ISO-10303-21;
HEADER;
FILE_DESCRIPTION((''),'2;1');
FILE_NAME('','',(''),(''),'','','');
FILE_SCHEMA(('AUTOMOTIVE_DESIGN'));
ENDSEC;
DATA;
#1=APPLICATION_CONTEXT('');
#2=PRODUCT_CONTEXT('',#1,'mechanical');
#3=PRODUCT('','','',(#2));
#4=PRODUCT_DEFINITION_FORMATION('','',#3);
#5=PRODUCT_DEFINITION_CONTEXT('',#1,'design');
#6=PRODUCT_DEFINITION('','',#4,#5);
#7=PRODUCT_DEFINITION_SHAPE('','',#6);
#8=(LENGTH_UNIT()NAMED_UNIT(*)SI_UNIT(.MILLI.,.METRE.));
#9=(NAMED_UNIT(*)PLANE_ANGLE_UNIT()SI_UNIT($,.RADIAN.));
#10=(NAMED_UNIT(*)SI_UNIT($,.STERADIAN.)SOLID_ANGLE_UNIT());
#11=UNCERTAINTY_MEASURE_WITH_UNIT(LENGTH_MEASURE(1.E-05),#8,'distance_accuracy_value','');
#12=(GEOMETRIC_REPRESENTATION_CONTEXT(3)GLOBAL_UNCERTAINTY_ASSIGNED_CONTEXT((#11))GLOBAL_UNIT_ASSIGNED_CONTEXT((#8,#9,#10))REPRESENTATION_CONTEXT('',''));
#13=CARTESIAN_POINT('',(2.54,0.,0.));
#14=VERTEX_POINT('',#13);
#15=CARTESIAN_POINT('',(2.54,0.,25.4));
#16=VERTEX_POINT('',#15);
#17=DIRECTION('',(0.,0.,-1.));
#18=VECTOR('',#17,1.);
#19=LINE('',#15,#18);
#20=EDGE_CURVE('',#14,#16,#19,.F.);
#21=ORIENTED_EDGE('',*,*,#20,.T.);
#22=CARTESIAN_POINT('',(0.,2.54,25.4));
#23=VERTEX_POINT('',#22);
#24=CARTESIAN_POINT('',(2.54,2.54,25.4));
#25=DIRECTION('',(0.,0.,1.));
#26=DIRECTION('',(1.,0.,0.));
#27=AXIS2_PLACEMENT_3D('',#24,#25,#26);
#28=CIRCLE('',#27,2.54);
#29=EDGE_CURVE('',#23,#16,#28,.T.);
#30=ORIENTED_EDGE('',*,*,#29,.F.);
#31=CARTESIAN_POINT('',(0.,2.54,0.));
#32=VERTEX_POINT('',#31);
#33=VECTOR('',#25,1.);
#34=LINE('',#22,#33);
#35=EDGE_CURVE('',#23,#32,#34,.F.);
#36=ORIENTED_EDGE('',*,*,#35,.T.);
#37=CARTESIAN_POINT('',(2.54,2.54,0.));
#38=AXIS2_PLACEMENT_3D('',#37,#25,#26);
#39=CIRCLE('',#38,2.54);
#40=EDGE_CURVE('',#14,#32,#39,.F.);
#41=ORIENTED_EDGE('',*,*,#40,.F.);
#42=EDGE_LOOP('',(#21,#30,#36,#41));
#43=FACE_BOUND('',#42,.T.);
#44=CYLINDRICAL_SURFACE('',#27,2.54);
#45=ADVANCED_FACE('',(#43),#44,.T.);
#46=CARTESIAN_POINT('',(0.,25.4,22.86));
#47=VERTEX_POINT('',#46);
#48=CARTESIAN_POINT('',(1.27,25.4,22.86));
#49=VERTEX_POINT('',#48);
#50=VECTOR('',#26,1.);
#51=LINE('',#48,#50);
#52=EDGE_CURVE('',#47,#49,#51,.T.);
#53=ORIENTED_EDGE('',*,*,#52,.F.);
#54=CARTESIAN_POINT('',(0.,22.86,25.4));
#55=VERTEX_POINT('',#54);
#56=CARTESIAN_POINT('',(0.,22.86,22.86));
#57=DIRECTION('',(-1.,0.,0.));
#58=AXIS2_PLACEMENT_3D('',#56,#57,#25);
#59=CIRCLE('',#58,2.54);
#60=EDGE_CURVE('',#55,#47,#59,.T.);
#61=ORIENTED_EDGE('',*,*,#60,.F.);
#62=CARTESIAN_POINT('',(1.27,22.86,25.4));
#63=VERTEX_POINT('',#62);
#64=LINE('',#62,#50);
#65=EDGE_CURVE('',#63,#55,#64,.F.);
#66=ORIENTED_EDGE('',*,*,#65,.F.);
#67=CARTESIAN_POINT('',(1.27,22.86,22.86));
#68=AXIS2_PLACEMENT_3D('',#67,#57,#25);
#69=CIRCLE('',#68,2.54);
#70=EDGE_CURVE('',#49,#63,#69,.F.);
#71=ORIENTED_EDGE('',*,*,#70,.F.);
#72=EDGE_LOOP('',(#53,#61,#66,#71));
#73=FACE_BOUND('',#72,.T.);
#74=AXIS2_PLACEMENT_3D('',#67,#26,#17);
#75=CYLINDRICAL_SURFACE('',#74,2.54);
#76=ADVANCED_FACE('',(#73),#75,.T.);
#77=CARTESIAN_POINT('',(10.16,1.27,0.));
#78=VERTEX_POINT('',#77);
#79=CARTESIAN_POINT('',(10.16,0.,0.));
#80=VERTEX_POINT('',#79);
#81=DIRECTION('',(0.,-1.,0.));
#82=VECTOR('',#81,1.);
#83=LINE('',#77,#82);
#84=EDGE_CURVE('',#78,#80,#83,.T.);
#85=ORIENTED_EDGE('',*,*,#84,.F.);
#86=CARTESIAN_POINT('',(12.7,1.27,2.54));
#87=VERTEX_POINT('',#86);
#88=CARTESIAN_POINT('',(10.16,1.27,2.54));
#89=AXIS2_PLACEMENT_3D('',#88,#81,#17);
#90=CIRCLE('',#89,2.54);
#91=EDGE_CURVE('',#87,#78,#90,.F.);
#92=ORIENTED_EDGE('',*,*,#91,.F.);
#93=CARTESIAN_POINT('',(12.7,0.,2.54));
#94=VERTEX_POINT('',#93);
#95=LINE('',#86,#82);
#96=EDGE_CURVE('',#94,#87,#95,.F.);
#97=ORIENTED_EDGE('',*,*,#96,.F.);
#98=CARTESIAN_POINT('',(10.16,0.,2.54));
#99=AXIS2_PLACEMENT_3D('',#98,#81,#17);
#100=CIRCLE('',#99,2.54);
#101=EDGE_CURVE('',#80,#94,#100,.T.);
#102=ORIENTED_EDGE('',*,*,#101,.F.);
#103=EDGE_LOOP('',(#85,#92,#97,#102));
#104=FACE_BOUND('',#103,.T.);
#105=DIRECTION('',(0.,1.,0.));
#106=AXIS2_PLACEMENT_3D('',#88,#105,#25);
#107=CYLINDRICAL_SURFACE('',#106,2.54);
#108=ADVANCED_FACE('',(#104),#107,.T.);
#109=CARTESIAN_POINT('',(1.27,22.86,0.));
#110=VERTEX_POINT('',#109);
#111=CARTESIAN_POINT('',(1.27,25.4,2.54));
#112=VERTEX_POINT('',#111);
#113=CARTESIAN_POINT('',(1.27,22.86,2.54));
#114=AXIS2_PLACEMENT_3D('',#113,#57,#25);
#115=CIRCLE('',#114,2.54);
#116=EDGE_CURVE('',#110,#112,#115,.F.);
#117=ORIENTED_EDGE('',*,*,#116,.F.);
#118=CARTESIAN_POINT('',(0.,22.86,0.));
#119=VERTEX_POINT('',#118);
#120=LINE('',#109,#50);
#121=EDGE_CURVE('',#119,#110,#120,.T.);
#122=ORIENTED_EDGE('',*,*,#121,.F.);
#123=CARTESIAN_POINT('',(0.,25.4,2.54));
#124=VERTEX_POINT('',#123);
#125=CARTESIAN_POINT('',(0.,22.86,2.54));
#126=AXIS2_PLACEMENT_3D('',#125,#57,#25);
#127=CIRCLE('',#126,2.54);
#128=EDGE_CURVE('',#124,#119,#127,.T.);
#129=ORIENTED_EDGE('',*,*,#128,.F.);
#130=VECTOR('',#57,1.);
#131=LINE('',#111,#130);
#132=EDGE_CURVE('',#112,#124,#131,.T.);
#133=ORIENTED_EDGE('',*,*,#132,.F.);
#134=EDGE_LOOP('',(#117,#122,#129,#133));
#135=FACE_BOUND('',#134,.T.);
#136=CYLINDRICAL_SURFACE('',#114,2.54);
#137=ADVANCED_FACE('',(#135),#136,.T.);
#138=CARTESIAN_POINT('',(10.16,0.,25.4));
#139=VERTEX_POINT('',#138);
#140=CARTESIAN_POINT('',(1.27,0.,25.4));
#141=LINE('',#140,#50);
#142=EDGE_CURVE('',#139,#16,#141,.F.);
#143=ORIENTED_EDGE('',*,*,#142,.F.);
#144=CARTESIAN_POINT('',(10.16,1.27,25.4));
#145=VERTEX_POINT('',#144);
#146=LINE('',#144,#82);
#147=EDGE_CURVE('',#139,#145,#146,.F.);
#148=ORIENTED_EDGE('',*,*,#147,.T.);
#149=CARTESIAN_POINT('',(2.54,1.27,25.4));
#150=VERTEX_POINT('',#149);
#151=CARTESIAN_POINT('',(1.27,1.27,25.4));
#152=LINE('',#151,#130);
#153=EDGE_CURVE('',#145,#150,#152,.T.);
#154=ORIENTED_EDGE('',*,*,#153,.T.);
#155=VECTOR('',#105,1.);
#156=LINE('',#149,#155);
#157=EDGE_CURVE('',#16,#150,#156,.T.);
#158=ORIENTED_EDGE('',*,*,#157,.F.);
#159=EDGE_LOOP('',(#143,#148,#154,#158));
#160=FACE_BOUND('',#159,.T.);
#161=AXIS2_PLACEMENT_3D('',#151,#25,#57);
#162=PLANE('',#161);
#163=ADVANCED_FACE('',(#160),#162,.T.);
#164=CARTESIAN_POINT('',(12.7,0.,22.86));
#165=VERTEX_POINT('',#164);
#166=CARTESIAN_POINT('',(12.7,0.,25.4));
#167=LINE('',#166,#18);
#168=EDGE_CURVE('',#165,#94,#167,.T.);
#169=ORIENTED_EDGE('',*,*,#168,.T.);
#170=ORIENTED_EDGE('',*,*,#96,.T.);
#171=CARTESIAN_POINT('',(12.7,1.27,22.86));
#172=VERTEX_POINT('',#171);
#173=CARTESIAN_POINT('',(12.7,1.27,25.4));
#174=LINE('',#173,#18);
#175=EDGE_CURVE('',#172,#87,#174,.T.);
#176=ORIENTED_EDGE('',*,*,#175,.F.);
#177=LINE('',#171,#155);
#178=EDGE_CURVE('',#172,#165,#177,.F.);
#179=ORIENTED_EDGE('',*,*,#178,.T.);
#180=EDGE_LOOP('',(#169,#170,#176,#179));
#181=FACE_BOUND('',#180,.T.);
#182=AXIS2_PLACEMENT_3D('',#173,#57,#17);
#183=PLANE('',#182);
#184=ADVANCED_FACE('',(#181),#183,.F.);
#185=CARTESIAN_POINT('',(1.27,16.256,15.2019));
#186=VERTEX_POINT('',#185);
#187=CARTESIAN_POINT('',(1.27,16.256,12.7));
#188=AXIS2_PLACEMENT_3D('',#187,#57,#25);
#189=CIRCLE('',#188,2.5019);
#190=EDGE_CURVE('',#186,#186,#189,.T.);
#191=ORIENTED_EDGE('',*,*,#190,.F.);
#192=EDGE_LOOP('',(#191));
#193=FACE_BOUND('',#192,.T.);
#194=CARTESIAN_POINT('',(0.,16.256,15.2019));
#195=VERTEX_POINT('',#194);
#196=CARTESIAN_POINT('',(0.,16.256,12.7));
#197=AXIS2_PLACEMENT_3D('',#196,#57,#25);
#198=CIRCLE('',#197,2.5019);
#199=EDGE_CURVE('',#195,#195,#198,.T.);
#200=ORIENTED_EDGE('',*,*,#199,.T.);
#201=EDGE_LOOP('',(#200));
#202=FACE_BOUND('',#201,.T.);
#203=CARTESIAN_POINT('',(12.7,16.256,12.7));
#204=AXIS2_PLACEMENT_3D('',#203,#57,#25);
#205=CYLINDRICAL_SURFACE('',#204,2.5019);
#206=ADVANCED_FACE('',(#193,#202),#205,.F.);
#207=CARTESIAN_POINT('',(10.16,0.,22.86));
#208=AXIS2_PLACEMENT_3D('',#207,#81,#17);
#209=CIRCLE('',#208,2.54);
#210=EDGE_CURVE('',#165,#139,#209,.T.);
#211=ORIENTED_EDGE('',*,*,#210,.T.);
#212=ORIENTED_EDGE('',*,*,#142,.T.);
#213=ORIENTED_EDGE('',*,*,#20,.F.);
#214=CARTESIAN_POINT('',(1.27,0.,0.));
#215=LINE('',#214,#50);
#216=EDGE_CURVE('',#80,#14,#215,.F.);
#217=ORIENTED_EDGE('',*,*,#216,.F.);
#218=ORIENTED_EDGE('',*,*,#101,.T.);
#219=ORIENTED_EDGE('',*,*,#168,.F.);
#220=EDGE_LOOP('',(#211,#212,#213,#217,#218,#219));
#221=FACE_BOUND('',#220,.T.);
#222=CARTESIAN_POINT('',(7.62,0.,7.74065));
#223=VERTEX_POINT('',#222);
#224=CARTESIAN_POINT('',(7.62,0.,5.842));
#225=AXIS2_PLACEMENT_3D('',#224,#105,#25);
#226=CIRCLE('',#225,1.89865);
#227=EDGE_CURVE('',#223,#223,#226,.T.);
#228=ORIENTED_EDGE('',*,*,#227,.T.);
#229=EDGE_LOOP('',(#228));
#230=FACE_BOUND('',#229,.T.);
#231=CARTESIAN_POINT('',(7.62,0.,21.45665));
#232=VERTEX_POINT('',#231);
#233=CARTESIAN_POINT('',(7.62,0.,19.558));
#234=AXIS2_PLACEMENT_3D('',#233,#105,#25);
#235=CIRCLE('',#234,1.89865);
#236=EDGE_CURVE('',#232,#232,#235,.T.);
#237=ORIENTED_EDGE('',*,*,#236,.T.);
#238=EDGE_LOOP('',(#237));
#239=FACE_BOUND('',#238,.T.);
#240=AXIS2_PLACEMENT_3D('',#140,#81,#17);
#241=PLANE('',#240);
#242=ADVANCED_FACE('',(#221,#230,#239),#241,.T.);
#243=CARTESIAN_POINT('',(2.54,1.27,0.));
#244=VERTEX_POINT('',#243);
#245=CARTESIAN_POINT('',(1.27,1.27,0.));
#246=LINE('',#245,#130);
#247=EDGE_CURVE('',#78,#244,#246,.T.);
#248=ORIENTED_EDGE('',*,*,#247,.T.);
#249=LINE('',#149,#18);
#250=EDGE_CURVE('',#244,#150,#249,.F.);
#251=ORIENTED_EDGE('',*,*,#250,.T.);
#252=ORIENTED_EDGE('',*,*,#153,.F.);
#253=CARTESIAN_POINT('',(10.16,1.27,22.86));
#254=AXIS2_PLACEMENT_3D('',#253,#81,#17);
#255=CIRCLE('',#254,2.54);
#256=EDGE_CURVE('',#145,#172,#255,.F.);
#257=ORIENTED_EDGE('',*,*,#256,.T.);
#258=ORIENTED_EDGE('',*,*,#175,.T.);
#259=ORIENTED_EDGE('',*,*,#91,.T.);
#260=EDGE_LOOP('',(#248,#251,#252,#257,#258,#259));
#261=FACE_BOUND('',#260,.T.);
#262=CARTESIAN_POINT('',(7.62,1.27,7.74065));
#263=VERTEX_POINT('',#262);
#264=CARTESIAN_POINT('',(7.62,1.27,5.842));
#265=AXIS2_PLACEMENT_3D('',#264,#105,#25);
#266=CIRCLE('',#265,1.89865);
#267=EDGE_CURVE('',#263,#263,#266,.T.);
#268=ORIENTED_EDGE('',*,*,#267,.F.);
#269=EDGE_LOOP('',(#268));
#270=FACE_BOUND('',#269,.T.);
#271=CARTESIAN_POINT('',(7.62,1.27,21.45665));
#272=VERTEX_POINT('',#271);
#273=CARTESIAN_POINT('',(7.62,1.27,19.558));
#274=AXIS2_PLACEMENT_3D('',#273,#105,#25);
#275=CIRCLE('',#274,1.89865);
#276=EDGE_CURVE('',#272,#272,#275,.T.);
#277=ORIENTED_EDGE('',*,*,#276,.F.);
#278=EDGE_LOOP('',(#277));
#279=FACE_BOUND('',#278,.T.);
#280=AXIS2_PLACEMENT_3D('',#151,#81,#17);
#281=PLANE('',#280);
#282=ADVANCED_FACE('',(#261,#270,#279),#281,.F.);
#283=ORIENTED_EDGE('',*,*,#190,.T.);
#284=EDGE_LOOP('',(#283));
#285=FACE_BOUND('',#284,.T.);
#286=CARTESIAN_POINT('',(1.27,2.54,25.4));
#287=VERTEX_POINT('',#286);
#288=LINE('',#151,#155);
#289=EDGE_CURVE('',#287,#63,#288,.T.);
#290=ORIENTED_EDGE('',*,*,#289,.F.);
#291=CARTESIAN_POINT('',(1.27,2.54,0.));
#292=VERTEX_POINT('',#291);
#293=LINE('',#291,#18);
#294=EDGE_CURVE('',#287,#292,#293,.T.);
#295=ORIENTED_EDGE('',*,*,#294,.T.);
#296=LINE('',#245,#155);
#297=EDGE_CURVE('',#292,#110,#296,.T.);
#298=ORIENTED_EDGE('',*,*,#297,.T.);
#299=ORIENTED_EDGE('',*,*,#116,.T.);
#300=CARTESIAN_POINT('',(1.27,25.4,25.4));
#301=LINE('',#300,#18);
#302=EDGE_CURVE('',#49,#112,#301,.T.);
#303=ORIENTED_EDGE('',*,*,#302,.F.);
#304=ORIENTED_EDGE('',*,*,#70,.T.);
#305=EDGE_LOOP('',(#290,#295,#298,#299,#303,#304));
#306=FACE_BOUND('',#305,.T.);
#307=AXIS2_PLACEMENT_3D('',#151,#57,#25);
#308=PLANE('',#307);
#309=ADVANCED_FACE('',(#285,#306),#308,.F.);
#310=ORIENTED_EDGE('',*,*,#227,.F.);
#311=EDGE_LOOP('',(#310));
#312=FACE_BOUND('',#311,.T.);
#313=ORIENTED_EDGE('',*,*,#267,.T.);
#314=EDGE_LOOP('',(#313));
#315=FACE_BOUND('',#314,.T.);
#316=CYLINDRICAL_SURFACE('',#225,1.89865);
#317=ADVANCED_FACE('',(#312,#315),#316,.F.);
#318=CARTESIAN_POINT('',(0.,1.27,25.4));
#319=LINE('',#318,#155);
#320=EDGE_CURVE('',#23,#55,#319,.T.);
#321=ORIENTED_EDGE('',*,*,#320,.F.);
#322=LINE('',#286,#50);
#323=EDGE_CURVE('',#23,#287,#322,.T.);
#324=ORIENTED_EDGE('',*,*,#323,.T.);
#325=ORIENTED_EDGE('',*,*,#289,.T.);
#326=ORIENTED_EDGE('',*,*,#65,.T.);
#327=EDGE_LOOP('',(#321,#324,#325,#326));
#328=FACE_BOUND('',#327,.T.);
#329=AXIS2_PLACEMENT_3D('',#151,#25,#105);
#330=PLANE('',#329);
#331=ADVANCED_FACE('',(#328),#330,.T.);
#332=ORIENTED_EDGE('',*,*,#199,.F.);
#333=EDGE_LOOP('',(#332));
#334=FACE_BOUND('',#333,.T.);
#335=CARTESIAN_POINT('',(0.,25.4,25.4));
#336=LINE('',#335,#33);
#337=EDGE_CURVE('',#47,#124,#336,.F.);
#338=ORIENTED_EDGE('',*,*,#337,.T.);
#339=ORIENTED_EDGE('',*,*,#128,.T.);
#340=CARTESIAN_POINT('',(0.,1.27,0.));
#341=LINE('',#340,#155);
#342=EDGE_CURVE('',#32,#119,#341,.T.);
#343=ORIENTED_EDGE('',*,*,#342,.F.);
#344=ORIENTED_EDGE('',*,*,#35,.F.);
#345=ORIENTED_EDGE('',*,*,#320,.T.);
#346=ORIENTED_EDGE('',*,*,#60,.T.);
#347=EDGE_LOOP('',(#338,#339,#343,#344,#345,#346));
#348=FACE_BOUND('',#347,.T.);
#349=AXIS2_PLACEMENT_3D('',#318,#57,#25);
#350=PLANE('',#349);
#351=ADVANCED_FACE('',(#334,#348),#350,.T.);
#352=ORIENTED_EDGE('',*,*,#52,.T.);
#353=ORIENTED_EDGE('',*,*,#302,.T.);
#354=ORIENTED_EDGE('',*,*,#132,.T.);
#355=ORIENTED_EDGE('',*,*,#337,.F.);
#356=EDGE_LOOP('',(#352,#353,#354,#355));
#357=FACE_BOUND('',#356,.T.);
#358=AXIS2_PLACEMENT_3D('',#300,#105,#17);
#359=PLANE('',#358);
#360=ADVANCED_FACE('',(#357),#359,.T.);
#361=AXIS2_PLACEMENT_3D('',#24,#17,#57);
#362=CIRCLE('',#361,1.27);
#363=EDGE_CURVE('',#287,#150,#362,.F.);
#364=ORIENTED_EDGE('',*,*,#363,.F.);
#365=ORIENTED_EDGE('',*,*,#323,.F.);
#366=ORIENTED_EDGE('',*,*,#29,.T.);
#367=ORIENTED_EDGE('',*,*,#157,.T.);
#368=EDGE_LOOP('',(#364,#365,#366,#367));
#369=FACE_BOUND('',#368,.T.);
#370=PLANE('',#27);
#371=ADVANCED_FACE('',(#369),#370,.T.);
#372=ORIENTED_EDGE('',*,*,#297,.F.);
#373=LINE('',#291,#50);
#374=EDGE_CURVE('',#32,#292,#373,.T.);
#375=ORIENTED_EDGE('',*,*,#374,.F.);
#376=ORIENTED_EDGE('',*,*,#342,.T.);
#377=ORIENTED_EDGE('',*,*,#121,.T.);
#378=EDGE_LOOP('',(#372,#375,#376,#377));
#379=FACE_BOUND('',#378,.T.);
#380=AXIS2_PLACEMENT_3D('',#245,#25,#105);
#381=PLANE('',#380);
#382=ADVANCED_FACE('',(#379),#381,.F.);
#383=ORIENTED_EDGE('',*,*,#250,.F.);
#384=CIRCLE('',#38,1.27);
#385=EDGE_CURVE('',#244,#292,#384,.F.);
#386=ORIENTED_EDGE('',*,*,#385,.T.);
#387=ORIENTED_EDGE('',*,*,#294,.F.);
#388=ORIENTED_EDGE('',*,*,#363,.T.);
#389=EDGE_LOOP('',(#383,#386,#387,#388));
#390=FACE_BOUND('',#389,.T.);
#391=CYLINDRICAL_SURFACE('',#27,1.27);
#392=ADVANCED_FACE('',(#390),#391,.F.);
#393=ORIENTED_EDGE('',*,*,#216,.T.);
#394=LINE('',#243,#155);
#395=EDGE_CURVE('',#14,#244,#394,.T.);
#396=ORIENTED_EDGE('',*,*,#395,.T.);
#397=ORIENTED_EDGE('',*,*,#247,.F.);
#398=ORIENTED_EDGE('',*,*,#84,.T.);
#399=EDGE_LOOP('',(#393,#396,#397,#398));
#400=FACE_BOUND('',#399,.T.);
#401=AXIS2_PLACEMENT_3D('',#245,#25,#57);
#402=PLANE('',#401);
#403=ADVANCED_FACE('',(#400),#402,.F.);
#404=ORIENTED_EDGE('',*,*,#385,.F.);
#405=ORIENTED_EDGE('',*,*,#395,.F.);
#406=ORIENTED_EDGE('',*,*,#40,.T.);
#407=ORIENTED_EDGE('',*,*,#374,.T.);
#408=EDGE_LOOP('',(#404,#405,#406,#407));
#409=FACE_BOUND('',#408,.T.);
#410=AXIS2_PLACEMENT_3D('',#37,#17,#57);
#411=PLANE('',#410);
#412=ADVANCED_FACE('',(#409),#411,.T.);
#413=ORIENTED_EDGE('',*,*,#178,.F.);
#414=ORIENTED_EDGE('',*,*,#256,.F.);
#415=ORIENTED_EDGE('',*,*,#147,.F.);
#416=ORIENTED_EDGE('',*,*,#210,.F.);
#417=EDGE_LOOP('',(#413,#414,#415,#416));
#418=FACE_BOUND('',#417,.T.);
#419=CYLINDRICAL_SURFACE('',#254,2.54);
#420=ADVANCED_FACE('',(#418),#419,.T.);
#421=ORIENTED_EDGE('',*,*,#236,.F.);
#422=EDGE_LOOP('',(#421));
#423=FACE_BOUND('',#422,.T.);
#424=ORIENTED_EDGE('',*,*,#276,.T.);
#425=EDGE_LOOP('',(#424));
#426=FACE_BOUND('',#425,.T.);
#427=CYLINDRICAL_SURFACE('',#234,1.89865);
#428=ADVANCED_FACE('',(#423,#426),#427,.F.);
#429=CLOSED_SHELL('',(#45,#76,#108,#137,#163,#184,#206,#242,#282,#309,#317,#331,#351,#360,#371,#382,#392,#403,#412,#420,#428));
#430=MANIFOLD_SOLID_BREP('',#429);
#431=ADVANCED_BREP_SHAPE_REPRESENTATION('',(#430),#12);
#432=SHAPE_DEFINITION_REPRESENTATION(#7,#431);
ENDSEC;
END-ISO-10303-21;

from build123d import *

# Parameters (mm, degrees)
BOSS_EXTRUDE1_DEPTH    = 25.4
CONVERT_SOLID1_DEPTH   = 25.4
CONVERT_SOLID1_2_DEPTH = 25.4
SKETCH7_R              = 2.5019
CUT_EXTRUDE1_DEPTH     = 39.1
FILLET1_R              = 2.54
SKETCH8_R              = 1.89865
CUT_EXTRUDE2_DEPTH     = 38.265357908


# Read off the part's stored shape, not the designer's step: Convert-Solid1
with BuildPart() as part:
    # Sketch2 → Boss-Extrude1 (new body)
    with BuildSketch(Plane.XY):
        Polygon((0, 0), (0, 25.4), (1.27, 25.4), (1.27, 1.27), (12.7, 1.27), (12.7, 0), align=None)
    extrude(amount=BOSS_EXTRUDE1_DEPTH)

    # Convert-Solid1 outline → Convert-Solid1 (cut)
    with BuildSketch(Plane.XY):
        with BuildLine():
            ThreePointArc((2.54, 0), (0.743948776, 0.743948776), (0, 2.54))
            Line((0, 2.54), (0, 0))
            Line((0, 0), (2.54, 0))
        make_face()
    extrude(amount=CONVERT_SOLID1_DEPTH, mode=Mode.SUBTRACT)

    # Convert-Solid1 2 outline → Convert-Solid1 2 (add)
    with BuildSketch(Plane.XY):
        with BuildLine():
            ThreePointArc((2.54, 1.27), (1.641974388, 1.641974388), (1.27, 2.54))
            Line((1.27, 2.54), (1.27, 1.27))
            Line((1.27, 1.27), (2.54, 1.27))
        make_face()
    extrude(amount=CONVERT_SOLID1_2_DEPTH)

    # Sketch7 → Cut-Extrude1 (cut, through all)
    with BuildSketch(Plane.ZY):
        with Locations((12.7, 16.256)):
            Circle(SKETCH7_R)
    extrude(amount=-CUT_EXTRUDE1_DEPTH, mode=Mode.SUBTRACT)

    # Fillet1
    fillet1_edges = [part.edges().sort_by_distance(p)[0] for p in [
        (12.7, 0.635, 0),
        (12.7, 0.635, 25.4),
        (0.635, 25.4, 25.4),
        (0.635, 25.4, 0),
    ]]
    fillet(fillet1_edges, radius=FILLET1_R)

    # Sketch8 → Cut-Extrude2 (cut, through all)
    with BuildSketch(Plane(origin=(0, 1.27, 0), x_dir=(1, 0, 0), z_dir=(0, 1, 0))):
        with Locations(Location((7.62, -5.842, 0), (0, 0, 270))):
            Circle(SKETCH8_R)
        with Locations(Location((7.62, -19.558, 0), (0, 0, 270))):
            Circle(SKETCH8_R)
    extrude(amount=-CUT_EXTRUDE2_DEPTH, mode=Mode.SUBTRACT)


solid = part.part
